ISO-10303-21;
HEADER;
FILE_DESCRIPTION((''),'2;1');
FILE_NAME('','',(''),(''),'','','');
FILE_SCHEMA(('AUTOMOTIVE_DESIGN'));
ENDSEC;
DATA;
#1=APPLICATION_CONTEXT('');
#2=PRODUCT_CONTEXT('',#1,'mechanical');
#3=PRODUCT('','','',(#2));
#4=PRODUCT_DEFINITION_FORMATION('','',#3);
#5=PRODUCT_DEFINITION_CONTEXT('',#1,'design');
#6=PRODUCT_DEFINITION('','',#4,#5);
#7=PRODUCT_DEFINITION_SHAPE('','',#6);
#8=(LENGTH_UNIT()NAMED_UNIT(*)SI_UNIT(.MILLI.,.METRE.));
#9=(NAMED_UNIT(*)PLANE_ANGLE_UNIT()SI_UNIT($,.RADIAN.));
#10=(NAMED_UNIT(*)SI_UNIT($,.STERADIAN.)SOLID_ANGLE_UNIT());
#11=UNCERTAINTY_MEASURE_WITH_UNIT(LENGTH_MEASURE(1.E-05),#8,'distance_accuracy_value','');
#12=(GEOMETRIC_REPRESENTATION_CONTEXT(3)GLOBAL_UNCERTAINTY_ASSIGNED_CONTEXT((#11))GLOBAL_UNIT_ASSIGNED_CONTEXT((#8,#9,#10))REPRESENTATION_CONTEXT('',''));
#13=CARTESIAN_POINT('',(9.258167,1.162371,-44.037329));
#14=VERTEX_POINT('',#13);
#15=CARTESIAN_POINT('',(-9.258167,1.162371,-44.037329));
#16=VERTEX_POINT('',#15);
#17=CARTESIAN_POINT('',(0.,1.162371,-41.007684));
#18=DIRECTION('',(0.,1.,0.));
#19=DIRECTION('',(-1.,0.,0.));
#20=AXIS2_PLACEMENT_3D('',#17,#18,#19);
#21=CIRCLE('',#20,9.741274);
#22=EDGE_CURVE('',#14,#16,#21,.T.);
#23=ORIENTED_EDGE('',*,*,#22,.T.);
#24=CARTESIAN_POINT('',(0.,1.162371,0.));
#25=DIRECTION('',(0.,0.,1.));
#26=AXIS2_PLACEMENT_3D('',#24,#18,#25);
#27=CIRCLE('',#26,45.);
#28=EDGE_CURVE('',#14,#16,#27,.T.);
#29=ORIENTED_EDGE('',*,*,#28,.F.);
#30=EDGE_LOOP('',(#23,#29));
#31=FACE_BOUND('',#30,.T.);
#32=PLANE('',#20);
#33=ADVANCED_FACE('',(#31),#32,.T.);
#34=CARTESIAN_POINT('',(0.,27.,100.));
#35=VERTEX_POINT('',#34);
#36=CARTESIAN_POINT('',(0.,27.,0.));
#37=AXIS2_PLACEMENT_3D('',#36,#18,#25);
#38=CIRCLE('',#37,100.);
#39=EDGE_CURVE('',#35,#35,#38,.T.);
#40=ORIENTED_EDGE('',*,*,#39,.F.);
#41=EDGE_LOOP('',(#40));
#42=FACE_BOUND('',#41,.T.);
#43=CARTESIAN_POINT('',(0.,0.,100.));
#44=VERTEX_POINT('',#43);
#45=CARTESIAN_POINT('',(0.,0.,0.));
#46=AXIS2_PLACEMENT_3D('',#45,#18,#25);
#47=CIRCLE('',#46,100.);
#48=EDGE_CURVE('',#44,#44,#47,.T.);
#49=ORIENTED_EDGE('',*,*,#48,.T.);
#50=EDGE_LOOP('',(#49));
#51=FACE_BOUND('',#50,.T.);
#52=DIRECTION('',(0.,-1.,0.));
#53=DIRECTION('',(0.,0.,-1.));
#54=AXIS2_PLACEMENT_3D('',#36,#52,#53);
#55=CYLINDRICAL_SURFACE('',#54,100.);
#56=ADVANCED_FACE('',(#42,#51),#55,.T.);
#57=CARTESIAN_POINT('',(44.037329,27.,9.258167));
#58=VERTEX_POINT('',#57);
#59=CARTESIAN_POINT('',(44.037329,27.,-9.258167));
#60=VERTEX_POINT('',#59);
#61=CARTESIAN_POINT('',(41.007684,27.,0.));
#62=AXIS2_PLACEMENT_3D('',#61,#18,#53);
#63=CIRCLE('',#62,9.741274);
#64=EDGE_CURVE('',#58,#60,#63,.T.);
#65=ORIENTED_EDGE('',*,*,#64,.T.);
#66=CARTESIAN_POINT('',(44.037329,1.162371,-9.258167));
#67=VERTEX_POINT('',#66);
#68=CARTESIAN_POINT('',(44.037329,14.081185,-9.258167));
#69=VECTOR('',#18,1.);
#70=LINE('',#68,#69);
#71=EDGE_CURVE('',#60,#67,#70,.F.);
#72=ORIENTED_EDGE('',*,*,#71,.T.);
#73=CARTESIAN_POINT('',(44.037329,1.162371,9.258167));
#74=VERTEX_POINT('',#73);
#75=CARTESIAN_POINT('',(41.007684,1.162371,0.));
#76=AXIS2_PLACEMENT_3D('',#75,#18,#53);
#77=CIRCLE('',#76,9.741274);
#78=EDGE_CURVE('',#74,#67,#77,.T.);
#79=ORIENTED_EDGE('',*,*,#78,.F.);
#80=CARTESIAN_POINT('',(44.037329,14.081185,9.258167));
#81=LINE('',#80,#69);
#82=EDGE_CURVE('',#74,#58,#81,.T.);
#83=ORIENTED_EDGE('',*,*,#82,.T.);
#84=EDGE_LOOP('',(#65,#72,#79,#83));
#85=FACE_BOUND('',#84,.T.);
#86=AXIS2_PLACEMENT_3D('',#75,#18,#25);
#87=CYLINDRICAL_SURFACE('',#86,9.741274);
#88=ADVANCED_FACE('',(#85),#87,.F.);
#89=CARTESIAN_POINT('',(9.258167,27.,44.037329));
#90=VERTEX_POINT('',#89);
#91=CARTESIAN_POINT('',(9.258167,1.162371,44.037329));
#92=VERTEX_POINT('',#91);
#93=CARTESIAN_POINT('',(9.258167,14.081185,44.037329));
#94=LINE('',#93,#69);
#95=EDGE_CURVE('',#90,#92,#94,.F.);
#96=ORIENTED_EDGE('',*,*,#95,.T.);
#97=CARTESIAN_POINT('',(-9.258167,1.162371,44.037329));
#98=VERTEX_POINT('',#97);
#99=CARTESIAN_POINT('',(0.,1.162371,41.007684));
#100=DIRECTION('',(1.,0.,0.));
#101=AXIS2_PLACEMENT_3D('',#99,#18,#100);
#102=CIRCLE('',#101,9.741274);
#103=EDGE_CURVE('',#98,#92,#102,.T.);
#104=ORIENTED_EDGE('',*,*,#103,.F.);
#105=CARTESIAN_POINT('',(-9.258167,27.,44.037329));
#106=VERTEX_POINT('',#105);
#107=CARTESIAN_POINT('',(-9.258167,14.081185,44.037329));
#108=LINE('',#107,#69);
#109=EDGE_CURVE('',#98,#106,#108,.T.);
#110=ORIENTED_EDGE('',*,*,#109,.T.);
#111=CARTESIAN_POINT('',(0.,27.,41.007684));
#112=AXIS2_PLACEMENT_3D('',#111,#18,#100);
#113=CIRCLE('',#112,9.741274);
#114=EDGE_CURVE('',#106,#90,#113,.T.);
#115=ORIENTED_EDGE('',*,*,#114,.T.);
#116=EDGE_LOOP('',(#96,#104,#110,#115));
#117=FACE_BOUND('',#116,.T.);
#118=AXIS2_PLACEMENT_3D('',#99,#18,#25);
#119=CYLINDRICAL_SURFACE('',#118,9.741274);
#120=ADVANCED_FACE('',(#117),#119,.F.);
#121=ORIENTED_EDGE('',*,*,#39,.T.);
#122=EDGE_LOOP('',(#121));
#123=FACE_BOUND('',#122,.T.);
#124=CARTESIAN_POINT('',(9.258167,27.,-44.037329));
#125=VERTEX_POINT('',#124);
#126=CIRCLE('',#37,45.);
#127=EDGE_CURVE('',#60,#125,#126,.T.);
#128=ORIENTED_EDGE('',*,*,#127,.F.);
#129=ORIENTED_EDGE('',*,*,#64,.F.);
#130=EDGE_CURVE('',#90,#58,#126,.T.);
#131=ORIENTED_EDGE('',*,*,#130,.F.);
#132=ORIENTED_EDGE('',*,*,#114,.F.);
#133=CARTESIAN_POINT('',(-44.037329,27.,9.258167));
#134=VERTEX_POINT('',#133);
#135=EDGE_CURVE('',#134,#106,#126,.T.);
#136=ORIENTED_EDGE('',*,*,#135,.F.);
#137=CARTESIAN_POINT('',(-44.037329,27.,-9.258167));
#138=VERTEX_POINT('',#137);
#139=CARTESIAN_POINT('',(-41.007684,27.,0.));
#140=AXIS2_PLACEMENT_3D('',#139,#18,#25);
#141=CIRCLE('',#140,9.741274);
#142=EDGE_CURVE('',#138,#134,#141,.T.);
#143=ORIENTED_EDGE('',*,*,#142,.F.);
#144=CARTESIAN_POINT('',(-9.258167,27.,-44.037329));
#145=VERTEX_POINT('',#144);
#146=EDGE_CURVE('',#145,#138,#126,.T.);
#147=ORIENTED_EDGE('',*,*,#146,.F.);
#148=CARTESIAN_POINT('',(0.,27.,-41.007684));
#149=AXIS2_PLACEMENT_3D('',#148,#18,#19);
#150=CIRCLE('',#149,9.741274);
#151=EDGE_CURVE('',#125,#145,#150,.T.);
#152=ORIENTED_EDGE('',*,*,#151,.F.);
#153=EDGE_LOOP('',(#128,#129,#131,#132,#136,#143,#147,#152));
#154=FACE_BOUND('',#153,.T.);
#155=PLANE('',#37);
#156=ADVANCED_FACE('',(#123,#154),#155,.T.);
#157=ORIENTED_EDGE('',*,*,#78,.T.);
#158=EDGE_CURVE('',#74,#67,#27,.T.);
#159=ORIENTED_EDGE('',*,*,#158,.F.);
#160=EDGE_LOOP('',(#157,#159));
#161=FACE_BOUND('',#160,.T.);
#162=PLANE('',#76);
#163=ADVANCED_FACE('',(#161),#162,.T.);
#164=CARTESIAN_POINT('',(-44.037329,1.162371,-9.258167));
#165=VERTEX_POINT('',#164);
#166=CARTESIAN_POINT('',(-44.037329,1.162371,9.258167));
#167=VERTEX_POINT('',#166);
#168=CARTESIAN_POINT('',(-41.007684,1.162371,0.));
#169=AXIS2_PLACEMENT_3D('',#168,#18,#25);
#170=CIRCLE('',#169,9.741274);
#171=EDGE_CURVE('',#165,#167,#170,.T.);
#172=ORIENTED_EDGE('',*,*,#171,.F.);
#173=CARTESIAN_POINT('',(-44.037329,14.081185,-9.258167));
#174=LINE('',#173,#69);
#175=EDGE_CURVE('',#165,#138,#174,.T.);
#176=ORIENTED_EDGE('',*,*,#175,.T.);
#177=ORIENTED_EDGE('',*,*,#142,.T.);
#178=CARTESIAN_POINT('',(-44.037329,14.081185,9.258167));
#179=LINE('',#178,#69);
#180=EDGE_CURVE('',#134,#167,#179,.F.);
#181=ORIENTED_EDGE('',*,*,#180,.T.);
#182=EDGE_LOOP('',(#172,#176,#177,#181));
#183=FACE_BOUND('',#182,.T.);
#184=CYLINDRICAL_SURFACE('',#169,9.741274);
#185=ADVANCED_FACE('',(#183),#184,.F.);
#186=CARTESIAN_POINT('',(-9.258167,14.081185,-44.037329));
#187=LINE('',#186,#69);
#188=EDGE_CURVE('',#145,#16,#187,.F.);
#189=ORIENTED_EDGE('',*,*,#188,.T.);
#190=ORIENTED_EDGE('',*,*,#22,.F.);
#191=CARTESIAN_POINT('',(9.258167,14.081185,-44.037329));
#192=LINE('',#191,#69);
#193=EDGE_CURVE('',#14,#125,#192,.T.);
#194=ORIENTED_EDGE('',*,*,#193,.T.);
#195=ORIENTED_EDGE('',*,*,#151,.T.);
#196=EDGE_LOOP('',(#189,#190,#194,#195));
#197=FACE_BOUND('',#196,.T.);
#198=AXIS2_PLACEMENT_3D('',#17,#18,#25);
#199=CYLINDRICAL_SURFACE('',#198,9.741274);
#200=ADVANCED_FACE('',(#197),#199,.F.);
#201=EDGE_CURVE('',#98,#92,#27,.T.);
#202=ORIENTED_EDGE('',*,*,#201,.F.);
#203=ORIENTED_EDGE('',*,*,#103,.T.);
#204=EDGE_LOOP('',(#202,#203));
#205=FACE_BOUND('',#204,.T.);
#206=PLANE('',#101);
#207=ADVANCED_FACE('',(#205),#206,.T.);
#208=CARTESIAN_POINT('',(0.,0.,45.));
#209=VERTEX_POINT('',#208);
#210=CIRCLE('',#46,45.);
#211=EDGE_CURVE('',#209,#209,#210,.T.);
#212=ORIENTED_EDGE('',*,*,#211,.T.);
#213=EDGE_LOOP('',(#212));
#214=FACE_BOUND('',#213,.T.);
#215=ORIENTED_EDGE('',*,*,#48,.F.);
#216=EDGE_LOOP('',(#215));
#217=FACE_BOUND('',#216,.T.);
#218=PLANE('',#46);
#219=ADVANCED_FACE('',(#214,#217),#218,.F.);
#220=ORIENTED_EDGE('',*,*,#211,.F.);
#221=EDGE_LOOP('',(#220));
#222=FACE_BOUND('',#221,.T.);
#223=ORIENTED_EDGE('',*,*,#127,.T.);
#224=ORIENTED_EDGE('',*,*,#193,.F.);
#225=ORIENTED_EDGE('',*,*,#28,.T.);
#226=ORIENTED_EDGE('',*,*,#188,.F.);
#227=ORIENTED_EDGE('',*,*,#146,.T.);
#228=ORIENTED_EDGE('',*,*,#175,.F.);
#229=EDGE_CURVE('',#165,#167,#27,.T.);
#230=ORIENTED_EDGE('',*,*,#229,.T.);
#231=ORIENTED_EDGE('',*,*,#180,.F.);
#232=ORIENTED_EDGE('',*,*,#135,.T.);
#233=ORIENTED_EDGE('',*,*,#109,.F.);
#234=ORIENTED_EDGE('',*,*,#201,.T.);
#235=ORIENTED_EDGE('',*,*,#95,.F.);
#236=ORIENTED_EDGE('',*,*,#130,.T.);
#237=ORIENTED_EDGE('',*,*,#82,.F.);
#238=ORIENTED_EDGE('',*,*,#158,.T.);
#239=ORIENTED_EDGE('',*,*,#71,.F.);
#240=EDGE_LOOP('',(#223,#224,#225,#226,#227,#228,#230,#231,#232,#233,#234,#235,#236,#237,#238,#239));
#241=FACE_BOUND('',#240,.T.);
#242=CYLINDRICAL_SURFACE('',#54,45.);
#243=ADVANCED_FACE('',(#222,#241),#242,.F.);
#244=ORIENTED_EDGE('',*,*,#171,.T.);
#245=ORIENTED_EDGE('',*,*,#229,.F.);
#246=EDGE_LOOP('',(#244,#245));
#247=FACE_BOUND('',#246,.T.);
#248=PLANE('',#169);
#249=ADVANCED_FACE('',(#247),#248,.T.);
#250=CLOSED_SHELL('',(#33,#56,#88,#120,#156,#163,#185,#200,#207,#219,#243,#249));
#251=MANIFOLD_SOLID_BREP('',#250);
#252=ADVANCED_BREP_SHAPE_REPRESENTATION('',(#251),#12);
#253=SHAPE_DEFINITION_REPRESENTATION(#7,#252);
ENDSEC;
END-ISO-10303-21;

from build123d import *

# Parameters (mm, degrees)
SKETCH1_R           = 100
BOSS_EXTRUDE1_DEPTH = 27
SKETCH2_R           = 45
CUT_EXTRUDE1_DEPTH  = 144.975692393
SKETCH3_R           = 9.741273523
CUT_EXTRUDE2_DEPTH  = 25.83762907
CIRPATTERN1_COUNT   = 4


with BuildPart() as part:
    # Sketch1 → Boss-Extrude1 (new body)
    with BuildSketch(Plane(origin=(0, 0, 0), x_dir=(1, 0, 0), z_dir=(0, 1, 0))):
        Circle(SKETCH1_R)
    extrude(amount=BOSS_EXTRUDE1_DEPTH)

    # Sketch2 → Cut-Extrude1 (cut, through all)
    with BuildSketch(Plane(origin=(0, 0, 0), x_dir=(1, 0, 0), z_dir=(0, 1, 0))):
        Circle(SKETCH2_R)
    extrude(amount=CUT_EXTRUDE1_DEPTH, mode=Mode.SUBTRACT)

    # Sketch3 → Cut-Extrude2 (cut)
    with BuildSketch(Plane(origin=(0, 27, 0), x_dir=(1, 0, 0), z_dir=(0, 1, 0))):
        with Locations((-41.007683576, 0)):
            Circle(SKETCH3_R)
    cut_extrude2 = extrude(amount=-CUT_EXTRUDE2_DEPTH, mode=Mode.SUBTRACT)

    # CirPattern1: Cut-Extrude2 ×4 about axis
    cirpattern1_axis = Axis((0, 0, 0), (0, 1, 0))
    for i in range(1, CIRPATTERN1_COUNT):
        add(cut_extrude2.rotate(cirpattern1_axis, i * 360 / CIRPATTERN1_COUNT), mode=Mode.SUBTRACT)


solid = part.part
